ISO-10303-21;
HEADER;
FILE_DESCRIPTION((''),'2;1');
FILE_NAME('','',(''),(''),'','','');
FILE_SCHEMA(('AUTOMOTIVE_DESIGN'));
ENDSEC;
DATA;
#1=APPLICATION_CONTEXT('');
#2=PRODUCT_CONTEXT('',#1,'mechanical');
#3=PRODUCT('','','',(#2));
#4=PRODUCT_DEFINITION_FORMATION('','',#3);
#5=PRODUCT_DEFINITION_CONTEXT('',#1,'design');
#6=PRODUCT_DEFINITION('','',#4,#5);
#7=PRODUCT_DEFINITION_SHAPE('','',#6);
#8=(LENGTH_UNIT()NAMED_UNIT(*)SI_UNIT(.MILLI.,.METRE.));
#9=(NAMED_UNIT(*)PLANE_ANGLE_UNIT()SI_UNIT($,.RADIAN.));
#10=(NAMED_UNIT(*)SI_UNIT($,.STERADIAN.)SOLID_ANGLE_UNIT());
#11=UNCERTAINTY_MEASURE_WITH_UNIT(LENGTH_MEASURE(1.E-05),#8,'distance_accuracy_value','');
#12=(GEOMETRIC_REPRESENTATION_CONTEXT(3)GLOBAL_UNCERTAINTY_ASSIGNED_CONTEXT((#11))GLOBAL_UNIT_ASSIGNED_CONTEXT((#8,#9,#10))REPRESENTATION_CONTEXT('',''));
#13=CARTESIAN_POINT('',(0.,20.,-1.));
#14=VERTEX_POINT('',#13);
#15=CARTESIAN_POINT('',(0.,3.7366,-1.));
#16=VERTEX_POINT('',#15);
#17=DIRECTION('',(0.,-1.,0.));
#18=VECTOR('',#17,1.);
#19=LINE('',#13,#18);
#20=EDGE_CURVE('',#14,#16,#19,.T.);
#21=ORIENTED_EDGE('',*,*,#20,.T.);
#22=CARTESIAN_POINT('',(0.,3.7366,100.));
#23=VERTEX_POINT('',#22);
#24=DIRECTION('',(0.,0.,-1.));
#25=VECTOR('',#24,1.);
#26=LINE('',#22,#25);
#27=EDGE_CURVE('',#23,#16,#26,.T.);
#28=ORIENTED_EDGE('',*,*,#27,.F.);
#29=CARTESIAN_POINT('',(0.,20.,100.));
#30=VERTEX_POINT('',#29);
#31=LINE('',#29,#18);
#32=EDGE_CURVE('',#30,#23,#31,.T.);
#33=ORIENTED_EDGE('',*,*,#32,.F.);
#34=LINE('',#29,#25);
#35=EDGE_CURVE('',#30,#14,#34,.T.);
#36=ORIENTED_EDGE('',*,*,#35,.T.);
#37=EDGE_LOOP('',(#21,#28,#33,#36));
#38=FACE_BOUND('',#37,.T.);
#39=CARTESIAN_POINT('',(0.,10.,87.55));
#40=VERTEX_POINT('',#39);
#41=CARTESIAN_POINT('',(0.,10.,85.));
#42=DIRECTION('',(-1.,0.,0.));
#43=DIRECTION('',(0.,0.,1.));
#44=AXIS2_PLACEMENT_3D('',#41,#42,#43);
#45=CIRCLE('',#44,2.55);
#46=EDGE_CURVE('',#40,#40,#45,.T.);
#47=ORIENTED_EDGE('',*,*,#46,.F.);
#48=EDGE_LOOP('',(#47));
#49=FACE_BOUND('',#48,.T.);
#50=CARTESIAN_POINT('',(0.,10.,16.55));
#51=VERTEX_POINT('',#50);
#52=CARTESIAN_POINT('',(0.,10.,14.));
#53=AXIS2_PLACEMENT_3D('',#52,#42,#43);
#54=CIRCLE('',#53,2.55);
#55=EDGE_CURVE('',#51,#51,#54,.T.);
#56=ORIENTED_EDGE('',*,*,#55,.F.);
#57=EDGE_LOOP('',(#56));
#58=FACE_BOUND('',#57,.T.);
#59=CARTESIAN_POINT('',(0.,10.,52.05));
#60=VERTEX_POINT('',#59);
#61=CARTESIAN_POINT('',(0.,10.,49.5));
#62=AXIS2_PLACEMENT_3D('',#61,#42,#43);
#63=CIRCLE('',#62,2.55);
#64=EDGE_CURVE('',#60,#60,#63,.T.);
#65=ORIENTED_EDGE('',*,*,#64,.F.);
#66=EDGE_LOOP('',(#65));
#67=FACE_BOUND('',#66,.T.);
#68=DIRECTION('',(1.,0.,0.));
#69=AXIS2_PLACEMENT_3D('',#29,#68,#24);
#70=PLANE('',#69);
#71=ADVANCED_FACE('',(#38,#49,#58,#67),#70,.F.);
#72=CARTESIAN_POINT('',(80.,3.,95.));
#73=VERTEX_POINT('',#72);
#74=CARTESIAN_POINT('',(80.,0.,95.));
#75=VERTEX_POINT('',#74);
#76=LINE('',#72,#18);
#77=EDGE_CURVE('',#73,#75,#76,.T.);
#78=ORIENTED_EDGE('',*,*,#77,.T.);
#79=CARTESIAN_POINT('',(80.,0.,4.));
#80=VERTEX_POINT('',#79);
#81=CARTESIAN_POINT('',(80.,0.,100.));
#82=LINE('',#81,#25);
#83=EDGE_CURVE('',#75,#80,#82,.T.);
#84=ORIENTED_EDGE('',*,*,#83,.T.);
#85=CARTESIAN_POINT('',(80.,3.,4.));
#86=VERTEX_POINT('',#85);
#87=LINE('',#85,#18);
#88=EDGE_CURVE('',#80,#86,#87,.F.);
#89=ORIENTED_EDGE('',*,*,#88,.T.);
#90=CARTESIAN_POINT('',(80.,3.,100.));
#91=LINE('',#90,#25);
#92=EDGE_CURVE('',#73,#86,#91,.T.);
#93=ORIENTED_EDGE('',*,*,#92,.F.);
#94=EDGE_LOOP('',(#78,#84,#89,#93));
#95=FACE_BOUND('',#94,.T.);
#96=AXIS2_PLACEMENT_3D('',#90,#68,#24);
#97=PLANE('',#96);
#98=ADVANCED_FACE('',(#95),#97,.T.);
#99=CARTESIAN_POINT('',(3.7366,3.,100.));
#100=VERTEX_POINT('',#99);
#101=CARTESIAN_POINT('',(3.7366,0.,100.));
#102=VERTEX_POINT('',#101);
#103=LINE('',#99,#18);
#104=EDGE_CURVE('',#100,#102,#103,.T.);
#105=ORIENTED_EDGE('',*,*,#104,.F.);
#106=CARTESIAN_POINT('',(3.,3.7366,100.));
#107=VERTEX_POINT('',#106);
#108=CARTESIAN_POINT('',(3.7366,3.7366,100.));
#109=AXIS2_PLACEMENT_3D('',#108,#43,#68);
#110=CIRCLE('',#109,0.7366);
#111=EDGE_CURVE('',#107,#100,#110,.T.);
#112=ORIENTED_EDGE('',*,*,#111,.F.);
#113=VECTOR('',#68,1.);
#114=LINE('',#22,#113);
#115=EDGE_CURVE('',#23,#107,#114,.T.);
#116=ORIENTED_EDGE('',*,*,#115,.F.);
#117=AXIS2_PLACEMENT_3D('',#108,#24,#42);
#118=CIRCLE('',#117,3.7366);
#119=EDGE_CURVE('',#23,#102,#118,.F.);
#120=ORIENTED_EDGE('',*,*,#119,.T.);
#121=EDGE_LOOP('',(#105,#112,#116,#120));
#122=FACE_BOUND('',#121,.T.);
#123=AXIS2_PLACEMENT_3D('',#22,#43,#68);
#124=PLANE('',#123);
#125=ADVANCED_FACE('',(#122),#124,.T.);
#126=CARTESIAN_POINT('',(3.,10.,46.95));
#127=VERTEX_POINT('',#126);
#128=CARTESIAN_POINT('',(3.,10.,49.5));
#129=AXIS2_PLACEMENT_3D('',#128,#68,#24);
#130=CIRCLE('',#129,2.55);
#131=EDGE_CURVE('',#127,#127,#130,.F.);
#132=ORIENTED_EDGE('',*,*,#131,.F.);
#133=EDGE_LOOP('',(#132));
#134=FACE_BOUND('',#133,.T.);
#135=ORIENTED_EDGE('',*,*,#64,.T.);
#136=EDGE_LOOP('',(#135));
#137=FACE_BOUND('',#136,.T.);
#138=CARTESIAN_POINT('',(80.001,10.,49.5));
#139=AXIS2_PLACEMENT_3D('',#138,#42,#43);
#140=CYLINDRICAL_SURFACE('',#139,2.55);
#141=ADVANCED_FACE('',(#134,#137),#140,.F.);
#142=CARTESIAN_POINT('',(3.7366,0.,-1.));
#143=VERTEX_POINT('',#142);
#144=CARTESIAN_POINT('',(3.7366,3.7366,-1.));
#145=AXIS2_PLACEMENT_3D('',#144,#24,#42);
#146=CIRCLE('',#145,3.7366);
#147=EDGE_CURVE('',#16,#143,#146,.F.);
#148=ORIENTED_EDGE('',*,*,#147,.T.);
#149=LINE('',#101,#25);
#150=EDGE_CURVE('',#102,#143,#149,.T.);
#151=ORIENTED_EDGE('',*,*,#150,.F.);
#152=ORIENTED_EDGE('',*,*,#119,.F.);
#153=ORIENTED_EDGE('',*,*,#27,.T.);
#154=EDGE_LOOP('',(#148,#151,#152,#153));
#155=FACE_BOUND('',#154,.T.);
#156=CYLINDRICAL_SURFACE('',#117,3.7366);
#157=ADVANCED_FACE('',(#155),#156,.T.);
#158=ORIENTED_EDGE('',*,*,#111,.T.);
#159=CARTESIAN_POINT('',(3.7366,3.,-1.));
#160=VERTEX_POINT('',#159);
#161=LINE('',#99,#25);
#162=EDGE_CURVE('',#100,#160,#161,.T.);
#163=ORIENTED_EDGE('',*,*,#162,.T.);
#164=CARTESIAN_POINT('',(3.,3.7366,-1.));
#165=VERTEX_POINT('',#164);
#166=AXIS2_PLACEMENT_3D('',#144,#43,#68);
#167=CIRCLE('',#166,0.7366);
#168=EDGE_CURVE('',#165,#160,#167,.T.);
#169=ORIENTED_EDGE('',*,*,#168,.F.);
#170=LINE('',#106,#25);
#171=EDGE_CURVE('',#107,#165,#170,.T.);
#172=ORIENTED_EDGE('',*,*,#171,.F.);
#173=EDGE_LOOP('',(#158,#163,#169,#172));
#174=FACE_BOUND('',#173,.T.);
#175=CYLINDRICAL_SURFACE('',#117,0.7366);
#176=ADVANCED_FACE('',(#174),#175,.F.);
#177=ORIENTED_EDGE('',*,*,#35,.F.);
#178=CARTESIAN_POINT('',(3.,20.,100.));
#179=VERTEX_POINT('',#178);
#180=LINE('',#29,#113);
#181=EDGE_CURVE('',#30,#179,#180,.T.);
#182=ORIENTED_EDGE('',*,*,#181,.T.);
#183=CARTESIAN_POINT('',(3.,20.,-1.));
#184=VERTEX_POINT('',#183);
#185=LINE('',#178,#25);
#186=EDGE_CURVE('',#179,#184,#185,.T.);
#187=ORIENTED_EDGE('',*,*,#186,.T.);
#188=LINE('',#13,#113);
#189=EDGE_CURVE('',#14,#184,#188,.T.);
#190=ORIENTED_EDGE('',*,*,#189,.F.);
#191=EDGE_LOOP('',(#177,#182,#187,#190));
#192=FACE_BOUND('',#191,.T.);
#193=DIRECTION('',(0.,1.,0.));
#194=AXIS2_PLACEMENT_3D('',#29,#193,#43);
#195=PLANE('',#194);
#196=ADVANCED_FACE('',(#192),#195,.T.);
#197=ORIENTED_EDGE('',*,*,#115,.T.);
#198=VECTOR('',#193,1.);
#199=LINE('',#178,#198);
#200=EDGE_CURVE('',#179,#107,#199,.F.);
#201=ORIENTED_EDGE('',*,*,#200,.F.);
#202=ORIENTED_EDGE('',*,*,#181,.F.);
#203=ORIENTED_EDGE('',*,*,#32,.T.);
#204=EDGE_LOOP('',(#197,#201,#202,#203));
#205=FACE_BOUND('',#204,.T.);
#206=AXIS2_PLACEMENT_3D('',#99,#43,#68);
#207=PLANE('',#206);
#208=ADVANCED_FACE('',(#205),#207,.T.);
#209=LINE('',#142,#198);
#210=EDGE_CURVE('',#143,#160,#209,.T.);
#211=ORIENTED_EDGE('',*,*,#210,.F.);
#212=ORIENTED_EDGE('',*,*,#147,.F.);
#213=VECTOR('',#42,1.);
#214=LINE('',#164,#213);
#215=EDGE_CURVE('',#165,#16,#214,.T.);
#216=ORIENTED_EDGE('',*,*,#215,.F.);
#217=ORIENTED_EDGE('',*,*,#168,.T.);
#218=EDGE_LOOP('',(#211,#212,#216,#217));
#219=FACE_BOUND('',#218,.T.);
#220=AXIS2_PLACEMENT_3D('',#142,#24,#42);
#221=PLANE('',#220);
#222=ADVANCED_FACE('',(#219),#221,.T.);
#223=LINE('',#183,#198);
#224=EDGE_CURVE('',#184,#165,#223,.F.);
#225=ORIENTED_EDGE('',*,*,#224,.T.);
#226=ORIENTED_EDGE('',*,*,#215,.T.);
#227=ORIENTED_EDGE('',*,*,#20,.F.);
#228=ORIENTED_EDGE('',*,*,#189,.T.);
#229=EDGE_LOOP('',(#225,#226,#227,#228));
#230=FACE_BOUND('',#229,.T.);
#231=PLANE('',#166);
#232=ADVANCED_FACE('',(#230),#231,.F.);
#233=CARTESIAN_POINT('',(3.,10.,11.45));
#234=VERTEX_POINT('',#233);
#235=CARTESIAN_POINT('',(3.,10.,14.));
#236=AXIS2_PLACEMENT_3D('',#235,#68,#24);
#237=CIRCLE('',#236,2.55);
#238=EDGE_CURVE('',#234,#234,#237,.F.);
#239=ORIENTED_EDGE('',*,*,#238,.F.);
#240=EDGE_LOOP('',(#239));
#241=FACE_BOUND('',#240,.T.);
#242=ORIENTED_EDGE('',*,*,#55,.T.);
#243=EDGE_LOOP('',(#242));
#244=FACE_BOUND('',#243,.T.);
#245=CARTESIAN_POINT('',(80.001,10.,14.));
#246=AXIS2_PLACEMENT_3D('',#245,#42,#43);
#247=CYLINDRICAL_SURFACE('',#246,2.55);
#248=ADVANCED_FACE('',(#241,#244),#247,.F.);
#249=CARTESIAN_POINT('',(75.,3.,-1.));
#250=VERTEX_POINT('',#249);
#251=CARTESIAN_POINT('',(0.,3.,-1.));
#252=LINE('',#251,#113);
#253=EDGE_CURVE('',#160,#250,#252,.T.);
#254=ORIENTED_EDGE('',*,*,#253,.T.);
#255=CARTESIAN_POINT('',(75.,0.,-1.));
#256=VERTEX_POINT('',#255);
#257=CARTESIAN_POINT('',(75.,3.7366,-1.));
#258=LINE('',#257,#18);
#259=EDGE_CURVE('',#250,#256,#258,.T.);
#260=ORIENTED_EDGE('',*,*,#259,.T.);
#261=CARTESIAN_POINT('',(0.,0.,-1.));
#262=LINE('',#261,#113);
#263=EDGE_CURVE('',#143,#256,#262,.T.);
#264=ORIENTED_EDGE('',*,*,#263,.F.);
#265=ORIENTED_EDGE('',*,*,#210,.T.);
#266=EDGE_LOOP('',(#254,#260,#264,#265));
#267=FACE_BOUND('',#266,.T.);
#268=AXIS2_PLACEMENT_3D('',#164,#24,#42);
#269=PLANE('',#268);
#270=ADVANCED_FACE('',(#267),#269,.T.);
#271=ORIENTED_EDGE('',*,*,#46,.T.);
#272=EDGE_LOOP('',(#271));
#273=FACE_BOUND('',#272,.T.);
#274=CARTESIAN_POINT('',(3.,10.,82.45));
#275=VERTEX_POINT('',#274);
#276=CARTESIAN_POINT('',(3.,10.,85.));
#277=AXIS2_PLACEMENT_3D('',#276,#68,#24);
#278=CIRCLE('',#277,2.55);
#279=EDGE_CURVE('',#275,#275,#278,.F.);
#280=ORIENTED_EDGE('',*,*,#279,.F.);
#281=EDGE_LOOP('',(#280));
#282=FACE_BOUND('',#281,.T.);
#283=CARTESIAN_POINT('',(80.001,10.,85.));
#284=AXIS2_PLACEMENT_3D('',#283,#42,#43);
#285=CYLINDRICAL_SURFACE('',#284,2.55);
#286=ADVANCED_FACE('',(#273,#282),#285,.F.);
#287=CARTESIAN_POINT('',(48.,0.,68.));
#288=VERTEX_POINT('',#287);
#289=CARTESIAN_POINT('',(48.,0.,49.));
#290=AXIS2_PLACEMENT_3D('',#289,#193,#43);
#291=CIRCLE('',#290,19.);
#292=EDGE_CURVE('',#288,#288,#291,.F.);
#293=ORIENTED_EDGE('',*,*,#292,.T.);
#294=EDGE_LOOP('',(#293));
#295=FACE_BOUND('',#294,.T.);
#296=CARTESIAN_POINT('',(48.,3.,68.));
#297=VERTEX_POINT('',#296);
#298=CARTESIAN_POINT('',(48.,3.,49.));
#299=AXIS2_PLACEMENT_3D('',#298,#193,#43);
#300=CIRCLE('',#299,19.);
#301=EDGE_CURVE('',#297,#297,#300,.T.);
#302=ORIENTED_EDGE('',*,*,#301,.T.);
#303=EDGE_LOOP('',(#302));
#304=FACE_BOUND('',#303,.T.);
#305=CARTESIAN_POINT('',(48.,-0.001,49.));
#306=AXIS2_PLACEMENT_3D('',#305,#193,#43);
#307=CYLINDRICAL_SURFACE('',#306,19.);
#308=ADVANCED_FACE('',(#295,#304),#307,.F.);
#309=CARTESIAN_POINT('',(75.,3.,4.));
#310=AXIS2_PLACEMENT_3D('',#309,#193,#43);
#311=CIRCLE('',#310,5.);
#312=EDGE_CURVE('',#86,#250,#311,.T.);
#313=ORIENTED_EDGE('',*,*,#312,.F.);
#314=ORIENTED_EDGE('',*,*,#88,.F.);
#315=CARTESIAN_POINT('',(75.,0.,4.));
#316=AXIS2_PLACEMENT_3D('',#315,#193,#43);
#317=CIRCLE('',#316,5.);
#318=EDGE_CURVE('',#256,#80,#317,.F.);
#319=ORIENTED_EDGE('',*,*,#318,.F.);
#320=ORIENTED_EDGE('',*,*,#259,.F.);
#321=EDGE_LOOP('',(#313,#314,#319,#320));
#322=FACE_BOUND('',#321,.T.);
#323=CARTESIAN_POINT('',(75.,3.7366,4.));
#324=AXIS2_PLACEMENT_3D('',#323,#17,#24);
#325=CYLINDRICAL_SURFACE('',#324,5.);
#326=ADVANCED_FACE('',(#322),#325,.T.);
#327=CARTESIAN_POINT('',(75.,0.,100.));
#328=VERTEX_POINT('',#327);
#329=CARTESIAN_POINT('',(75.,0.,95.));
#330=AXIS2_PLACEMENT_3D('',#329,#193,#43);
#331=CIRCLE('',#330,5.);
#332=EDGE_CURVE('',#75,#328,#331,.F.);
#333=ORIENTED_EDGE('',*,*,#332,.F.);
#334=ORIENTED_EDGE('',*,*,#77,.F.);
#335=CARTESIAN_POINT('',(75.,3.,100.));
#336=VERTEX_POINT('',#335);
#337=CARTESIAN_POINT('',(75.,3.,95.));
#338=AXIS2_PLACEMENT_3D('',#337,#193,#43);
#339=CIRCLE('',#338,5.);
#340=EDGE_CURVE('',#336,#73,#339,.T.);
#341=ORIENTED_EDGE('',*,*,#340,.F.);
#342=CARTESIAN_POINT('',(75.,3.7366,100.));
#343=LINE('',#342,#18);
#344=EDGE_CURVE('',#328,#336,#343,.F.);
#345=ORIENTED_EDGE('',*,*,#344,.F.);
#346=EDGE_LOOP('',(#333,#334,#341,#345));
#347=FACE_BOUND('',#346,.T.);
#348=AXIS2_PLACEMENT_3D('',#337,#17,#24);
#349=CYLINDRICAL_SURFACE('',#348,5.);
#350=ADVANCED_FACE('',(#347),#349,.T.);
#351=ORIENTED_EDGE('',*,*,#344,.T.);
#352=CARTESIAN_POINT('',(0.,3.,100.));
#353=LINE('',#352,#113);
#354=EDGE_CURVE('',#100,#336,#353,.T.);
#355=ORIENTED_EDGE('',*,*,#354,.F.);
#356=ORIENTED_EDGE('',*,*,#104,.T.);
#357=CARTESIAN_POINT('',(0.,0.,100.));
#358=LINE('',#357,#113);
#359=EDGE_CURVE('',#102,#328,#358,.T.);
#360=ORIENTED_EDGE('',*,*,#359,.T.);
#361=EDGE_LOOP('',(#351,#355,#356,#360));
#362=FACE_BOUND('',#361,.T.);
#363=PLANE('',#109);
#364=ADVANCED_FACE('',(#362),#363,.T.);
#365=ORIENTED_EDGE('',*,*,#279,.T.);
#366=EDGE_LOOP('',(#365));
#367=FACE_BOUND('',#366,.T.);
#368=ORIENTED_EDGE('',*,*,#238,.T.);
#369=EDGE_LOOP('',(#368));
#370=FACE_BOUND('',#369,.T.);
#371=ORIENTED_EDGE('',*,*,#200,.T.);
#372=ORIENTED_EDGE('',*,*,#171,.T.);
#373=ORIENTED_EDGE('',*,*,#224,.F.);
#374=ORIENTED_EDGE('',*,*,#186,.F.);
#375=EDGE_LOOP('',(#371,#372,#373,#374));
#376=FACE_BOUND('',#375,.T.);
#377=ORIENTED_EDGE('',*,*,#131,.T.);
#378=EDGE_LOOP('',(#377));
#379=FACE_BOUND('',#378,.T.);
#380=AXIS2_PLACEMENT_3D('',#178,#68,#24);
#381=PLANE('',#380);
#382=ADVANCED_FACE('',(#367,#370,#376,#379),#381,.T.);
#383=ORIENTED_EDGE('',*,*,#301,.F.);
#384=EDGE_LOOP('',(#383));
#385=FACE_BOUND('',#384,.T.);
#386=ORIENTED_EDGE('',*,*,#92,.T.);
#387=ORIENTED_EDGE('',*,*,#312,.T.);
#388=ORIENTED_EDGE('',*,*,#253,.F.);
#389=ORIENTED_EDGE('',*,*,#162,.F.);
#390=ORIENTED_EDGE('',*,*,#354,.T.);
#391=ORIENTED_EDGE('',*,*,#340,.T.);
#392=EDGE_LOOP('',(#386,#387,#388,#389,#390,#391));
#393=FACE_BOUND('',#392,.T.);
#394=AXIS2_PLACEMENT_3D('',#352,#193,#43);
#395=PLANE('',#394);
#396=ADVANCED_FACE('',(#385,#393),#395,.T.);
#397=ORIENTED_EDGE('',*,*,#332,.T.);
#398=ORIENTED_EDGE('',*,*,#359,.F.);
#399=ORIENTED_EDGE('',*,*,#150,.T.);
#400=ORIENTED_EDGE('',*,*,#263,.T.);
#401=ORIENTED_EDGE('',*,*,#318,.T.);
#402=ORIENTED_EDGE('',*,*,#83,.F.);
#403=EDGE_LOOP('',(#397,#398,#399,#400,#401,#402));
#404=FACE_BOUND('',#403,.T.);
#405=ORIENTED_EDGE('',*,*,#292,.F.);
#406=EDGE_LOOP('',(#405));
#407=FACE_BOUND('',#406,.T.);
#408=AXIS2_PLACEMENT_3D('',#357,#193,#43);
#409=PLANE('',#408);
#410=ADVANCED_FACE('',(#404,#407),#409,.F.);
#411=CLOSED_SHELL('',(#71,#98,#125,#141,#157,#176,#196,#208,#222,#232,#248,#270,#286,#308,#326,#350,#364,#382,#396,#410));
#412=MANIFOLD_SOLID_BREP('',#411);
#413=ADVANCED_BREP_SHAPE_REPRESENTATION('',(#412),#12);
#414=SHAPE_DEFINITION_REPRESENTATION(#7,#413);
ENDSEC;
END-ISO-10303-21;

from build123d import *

# Parameters (mm, degrees)
BASE_FLANGE1_DEPTH      = 100
BASE_FLANGE1_DEPTH_BACK = 1
FILLET1_R               = 5
CUT_EXTRUDE1_REACH      = 131.186
SKETCH2_R               = 19
CUT_EXTRUDE2_REACH      = 131.615
SKETCH3_R               = 2.55


# Sheet-metal steps are written as plain solids
with BuildPart() as part:
    # Sketch1 → Base-Flange1 (new, two sides: drawn at the far end of the back side and taken through both)
    with BuildSketch(Plane.XY.offset(-BASE_FLANGE1_DEPTH_BACK)):
        with BuildLine():
            Line((0, 20), (0, 3.7366))
            ThreePointArc((0, 3.7366), (1.094424801, 1.094424801), (3.7366, 0))
            Line((3.7366, 0), (80, 0))
            Line((80, 0), (80, 3))
            Line((80, 3), (3.7366, 3))
            ThreePointArc((3.7366, 3), (3.215745145, 3.215745145), (3, 3.7366))
            Line((3, 3.7366), (3, 20))
            Line((3, 20), (0, 20))
        make_face()
    extrude(amount=BASE_FLANGE1_DEPTH + BASE_FLANGE1_DEPTH_BACK)

    # Fillet1
    fillet1_edges = [part.edges().sort_by_distance(p)[0] for p in [
        (80, 1.5, -1),
        (80, 1.5, 100),
    ]]
    fillet(fillet1_edges, radius=FILLET1_R)

    # Sketch2 → Cut-Extrude1 (cut, up to next)
    with BuildSketch(Plane(origin=(0, 3, 0), x_dir=(1, 0, 0), z_dir=(0, 1, 0)), mode=Mode.PRIVATE) as cut_extrude1_sk1:
        with Locations(Location((48, -49, 0), (0, 0, 270))):
            Circle(SKETCH2_R)
    cut_extrude1_tool1 = extrude(cut_extrude1_sk1.sketch, amount=-CUT_EXTRUDE1_REACH, mode=Mode.PRIVATE) & part.part
    add(cut_extrude1_tool1.solids().sort_by_distance((48, 3, 49))[0], mode=Mode.SUBTRACT)

    # Sketch3 → Cut-Extrude2 (cut, up to next)
    with BuildSketch(Plane.ZY, mode=Mode.PRIVATE) as cut_extrude2_sk1:
        with Locations((14, 10)):
            Circle(SKETCH3_R)
    cut_extrude2_tool1 = extrude(cut_extrude2_sk1.sketch, amount=-CUT_EXTRUDE2_REACH, mode=Mode.PRIVATE) & part.part
    # Sketch3 → Cut-Extrude2 (cut, up to next)
    with BuildSketch(Plane.ZY, mode=Mode.PRIVATE) as cut_extrude2_sk2:
        with Locations((49.5, 10)):
            Circle(SKETCH3_R)
    cut_extrude2_tool2 = extrude(cut_extrude2_sk2.sketch, amount=-CUT_EXTRUDE2_REACH, mode=Mode.PRIVATE) & part.part
    # Sketch3 → Cut-Extrude2 (cut, up to next)
    with BuildSketch(Plane.ZY, mode=Mode.PRIVATE) as cut_extrude2_sk3:
        with Locations((85, 10)):
            Circle(SKETCH3_R)
    cut_extrude2_tool3 = extrude(cut_extrude2_sk3.sketch, amount=-CUT_EXTRUDE2_REACH, mode=Mode.PRIVATE) & part.part
    add(cut_extrude2_tool1.solids().sort_by_distance((0, 10, 14))[0], mode=Mode.SUBTRACT)
    add(cut_extrude2_tool2.solids().sort_by_distance((0, 10, 49.5))[0], mode=Mode.SUBTRACT)
    add(cut_extrude2_tool3.solids().sort_by_distance((0, 10, 85))[0], mode=Mode.SUBTRACT)


solid = part.part
